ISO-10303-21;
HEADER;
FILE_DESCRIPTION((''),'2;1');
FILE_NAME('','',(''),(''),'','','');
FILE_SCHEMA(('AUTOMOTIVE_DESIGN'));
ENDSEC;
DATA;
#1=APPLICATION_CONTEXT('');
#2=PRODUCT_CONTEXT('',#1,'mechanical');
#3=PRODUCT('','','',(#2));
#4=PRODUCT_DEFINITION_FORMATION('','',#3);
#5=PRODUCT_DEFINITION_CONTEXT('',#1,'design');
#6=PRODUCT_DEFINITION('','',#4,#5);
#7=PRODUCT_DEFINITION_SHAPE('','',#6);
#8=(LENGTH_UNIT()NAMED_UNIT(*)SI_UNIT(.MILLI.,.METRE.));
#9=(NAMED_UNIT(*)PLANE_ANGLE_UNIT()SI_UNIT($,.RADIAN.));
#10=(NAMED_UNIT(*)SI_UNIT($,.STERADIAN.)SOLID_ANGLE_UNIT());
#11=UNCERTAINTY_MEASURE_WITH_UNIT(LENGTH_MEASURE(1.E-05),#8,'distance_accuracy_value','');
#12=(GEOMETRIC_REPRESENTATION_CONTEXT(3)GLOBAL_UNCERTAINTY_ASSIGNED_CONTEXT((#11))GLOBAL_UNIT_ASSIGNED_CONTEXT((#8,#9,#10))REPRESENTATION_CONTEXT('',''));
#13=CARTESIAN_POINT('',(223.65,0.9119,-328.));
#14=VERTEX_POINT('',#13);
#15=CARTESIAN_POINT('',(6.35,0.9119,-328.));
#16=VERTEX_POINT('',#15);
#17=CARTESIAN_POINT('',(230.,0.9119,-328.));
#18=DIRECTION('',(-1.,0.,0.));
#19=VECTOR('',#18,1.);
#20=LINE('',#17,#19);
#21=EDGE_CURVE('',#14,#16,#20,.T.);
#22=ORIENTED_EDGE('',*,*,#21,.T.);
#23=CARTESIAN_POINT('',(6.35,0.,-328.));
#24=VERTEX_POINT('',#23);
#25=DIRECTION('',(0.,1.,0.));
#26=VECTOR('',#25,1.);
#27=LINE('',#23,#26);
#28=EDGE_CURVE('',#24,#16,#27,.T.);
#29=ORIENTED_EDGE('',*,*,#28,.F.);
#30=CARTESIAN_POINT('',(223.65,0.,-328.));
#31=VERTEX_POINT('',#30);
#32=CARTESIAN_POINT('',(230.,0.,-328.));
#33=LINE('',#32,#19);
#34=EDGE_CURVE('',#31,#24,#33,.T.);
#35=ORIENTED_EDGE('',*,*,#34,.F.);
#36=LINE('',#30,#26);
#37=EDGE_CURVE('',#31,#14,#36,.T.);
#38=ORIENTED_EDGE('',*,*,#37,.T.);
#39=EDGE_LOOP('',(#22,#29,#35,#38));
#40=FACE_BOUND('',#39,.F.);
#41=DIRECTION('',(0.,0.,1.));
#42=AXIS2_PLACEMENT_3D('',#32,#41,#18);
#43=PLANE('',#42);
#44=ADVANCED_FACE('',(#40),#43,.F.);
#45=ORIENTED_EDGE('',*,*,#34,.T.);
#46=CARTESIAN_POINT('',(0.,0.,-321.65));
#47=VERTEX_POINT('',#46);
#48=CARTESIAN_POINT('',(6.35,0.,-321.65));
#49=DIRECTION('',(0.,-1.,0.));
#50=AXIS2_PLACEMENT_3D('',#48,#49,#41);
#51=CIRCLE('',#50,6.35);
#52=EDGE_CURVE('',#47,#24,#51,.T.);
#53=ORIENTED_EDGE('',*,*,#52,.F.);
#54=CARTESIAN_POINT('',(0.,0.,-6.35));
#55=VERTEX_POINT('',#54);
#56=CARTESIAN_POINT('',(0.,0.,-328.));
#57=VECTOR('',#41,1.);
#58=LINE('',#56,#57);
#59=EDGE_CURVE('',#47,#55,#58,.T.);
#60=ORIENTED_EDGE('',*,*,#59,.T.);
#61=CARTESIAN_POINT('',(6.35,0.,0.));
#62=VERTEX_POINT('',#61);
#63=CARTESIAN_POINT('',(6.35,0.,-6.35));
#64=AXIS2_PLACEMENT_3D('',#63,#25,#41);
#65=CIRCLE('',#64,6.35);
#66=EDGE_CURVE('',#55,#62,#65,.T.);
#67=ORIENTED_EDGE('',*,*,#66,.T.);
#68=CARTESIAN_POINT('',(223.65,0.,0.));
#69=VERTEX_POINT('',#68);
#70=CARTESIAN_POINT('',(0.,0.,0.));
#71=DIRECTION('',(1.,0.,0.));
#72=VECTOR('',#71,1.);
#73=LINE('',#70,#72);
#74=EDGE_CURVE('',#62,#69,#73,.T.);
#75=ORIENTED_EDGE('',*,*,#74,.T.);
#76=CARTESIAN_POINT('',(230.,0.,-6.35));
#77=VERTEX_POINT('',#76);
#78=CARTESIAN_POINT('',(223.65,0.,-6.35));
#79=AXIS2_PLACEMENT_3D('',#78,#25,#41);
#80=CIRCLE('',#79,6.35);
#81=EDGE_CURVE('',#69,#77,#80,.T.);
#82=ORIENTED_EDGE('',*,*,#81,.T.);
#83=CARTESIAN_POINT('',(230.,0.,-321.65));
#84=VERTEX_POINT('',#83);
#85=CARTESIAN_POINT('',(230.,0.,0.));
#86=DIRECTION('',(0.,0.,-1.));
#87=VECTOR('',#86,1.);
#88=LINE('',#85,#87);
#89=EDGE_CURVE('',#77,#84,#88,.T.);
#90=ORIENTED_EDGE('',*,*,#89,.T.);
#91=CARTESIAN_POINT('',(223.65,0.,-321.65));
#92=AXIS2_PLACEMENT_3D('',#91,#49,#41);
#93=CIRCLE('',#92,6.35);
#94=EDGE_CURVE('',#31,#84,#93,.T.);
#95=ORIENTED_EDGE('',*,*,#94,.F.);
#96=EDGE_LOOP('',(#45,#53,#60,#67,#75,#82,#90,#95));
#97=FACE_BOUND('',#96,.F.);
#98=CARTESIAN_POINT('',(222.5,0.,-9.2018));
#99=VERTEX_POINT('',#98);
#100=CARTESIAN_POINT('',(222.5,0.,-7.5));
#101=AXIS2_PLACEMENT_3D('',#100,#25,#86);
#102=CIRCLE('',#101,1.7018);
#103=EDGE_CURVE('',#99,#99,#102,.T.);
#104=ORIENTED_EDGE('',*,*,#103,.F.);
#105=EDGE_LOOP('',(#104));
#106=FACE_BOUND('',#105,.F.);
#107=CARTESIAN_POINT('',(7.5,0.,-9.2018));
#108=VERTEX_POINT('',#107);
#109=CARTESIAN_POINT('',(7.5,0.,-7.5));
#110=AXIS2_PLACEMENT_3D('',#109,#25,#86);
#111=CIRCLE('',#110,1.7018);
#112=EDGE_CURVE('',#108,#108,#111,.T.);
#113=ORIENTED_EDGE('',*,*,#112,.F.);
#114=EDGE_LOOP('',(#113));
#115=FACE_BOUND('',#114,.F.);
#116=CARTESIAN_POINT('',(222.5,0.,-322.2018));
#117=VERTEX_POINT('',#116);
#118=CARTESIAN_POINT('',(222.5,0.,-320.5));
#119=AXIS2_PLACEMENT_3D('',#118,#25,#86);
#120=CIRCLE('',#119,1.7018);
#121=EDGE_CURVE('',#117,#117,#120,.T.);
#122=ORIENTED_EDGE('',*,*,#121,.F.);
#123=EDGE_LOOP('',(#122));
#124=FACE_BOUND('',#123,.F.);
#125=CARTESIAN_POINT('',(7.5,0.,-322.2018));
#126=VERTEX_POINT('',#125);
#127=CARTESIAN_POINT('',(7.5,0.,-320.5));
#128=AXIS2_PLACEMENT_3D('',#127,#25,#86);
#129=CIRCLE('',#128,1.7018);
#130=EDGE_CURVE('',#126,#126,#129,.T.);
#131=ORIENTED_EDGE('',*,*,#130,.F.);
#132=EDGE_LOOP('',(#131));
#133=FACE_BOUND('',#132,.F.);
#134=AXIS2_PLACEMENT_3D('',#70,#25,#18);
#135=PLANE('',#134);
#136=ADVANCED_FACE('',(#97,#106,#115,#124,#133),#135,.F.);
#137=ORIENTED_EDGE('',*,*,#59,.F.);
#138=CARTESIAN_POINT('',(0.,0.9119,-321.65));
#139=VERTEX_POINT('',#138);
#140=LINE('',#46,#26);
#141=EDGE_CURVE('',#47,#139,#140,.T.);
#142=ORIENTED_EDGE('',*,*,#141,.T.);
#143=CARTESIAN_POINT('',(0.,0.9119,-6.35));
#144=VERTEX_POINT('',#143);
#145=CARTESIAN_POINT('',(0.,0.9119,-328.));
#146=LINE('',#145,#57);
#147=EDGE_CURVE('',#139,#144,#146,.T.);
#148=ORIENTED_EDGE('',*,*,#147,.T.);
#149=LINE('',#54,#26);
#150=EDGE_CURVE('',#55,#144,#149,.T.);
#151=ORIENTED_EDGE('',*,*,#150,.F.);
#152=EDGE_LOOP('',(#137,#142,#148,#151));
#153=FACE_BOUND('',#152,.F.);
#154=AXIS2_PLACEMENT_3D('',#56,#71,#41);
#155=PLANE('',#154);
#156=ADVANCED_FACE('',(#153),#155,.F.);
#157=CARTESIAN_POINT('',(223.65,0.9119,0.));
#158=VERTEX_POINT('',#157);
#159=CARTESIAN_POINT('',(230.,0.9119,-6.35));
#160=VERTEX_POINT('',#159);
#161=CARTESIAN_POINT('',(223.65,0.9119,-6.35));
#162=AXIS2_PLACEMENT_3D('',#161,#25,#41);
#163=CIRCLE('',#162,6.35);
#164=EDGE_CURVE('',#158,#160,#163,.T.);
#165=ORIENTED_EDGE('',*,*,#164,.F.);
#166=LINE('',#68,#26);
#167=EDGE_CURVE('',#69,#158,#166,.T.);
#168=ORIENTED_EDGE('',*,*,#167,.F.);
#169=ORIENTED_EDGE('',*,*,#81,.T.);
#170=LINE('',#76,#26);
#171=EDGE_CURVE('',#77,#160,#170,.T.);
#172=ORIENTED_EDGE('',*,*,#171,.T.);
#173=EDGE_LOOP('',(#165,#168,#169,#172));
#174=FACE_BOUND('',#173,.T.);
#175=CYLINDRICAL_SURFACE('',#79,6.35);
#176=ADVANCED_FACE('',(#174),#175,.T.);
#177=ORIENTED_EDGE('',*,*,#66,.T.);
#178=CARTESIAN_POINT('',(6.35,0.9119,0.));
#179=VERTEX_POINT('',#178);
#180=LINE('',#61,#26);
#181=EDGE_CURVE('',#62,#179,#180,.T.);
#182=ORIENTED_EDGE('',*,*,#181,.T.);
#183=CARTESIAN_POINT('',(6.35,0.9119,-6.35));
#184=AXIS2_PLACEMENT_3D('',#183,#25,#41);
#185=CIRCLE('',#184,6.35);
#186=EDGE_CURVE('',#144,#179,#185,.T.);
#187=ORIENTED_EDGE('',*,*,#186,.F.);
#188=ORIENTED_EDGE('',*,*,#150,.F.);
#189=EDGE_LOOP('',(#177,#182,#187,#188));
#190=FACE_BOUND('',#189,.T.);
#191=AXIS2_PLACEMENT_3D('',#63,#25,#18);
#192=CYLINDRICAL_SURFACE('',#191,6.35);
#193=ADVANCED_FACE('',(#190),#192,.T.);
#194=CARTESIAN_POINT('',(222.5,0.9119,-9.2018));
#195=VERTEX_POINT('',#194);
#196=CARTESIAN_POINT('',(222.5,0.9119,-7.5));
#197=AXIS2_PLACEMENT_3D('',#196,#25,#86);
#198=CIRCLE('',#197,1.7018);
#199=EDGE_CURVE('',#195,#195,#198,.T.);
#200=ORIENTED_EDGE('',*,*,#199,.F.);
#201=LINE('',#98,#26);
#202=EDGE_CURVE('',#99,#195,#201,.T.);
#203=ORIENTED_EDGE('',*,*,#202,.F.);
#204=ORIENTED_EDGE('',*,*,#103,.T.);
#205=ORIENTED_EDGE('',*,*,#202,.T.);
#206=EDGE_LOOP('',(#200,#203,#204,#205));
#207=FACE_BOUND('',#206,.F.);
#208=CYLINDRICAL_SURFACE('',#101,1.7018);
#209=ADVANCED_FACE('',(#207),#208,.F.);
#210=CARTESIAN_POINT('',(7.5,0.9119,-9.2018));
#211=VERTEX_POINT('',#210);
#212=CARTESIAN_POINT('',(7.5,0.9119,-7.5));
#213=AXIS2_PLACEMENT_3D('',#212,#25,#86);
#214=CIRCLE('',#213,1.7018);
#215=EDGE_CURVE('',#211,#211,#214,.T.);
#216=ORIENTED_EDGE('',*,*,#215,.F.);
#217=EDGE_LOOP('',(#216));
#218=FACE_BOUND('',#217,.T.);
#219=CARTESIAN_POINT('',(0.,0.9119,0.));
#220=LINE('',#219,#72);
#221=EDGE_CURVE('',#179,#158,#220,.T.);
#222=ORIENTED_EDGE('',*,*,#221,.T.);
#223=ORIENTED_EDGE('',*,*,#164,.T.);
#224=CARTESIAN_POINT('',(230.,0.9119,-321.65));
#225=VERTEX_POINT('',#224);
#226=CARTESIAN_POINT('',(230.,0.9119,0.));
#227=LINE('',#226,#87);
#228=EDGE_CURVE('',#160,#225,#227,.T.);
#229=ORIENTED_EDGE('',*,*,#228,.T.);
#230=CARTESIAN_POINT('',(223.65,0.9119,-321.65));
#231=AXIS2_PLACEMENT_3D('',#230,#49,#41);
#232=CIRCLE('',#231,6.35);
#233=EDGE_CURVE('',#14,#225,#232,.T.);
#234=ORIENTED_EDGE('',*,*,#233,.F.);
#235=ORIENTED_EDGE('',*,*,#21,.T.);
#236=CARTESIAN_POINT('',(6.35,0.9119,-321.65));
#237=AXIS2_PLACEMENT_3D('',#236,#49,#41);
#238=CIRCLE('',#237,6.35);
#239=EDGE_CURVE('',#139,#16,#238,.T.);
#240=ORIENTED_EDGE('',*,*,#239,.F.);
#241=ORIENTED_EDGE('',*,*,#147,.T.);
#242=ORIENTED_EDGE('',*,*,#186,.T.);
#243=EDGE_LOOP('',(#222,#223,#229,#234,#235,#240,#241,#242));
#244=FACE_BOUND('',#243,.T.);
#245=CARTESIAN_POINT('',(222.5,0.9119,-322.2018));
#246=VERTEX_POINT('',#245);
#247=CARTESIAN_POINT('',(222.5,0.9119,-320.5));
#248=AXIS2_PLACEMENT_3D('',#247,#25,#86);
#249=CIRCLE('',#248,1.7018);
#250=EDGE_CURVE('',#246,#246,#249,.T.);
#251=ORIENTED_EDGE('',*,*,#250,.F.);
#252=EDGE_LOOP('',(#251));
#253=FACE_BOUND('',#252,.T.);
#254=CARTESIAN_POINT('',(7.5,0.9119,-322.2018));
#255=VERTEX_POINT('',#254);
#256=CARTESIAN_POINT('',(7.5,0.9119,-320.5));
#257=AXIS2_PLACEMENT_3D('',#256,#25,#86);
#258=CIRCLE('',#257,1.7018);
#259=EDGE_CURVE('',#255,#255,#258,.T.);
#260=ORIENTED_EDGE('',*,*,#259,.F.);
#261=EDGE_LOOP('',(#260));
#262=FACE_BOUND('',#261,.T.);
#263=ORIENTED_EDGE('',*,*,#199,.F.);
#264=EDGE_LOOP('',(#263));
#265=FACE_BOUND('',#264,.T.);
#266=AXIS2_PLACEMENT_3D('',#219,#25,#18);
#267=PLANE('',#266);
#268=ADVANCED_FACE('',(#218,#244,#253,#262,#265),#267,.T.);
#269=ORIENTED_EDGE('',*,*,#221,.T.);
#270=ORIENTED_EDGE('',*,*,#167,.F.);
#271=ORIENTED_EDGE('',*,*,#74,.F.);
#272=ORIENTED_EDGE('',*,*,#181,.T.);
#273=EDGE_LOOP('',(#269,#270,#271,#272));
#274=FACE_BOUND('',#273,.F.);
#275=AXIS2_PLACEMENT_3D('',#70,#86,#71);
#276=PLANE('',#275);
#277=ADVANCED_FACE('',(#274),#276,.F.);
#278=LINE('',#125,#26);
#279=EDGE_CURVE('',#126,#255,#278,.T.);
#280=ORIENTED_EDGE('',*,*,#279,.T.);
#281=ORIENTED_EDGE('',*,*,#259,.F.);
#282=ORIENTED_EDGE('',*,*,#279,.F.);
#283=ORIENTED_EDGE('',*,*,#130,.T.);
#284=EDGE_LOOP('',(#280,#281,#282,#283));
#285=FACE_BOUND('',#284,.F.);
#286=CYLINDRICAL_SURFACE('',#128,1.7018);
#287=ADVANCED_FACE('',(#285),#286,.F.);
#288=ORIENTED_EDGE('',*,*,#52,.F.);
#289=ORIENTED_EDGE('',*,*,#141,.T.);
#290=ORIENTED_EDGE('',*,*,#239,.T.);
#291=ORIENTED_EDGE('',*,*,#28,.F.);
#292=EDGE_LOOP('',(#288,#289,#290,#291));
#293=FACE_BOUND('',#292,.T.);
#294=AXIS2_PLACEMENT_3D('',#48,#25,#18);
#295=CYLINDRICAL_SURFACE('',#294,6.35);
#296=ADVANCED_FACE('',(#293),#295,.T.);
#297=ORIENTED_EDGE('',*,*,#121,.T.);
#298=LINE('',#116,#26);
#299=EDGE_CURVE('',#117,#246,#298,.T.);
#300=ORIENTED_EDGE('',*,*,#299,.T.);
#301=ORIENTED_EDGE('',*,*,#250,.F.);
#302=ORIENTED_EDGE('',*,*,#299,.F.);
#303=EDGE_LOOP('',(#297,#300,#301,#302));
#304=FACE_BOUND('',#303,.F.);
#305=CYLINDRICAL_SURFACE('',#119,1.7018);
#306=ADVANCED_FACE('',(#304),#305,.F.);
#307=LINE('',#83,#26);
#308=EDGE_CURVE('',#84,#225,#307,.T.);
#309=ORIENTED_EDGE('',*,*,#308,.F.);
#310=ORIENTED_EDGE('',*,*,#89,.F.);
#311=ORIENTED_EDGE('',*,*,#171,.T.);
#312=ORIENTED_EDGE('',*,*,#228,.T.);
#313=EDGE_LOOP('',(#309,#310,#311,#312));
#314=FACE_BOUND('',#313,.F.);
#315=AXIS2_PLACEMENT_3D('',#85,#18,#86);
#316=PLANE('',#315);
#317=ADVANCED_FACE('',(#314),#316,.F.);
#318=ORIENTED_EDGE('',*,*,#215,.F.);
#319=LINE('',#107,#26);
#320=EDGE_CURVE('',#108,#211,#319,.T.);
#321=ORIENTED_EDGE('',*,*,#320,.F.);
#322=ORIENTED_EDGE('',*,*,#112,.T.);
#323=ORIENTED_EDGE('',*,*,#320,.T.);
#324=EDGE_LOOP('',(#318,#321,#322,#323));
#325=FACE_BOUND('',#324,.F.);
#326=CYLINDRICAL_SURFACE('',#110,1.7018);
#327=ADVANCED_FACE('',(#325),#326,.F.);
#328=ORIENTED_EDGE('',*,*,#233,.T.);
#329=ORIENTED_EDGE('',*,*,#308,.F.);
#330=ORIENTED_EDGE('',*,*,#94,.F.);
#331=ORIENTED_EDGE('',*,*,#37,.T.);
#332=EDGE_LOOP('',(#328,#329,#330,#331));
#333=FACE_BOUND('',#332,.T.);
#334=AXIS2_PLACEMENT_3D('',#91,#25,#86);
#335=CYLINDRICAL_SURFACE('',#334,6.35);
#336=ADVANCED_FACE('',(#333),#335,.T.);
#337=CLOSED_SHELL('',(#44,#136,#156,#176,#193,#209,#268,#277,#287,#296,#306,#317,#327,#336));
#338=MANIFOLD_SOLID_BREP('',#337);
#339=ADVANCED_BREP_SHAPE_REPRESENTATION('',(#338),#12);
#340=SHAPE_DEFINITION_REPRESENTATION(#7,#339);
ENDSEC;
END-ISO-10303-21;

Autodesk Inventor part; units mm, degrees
ref_plane "YZ Plane" through (0, 0, 0) normal (1, 0, 0) x (0, 1, 0)
ref_plane "XZ Plane" through (0, 0, 0) normal (0, 1, 0) x (-1, 0, 0)
ref_plane "XY Plane" through (0, 0, 0) normal (0, 0, 1) x (1, 0, 0)
sketch "Sketch1" plane through (0, 0, 0) normal (0, 1, 0) x (-1, 0, 0)
  line L0 (0, 0) -> (-230, 0)
  line L1 (-230, 0) -> (-230, -328)
  line L2 (-230, -328) -> (0, -328)
  line L3 (0, -328) -> (0, 0)
  line L4 (-222.5, -7.5) -> (-7.5, -7.5) construction
  line L5 (-7.5, -7.5) -> (-7.5, -320.5) construction
  line L6 (-7.5, -320.5) -> (-222.5, -320.5) construction
  line L7 (-222.5, -320.5) -> (-222.5, -7.5) construction
  circle A0 centre (-7.5, -320.5) radius 1.6
  circle A1 centre (-222.5, -320.5) radius 1.6
  circle A2 centre (-222.5, -7.5) radius 1.6
  circle A3 centre (-7.5, -7.5) radius 1.6
  point P0 (-115, 0)
  dimension "d0" = 230
  dimension "d1" = 328
  dimension "d3" = 7.5
  dimension "d4" = 7.5
  dimension "d5" = 7.5
  dimension "d6" = 7.5
  dimension "d7" = 3.2
extrude "Plate1" add sketch "Sketch1" along normal blind 0.9119 contours L3 L2 L1 L0 | A0 | A1 | A2 | A3
hole "Hole1" at (222.5, 0, -320.5) at (7.5, 0, -320.5) at (7.5, 0, -7.5) at (222.5, 0, -7.5) direction (0, 1, 0) diameter 3.4036 end through all clearance for "Flat Head Machine Screw" size "M3" standard "Ansi Metric M Profile"
fillet "Corner Round1" radius 6.35 4 edges at (230, 0.4559, -328) (0, 0.4559, -328) (230, 0.4559, 0) (0, 0.4559, 0)
equation "\"d13\" = Thickness"
equation "\"d2\" = Thickness"
equation "\"BendRadius\" = Thickness"
equation "\"BendReliefWidth\" = Thickness"
equation "\"BendReliefDepth\" = 0.5 * Thickness"
equation "\"CornerReliefSize\" = 4 * Thickness"
equation "\"MinimumRemnant\" = 2 * Thickness"
equation "\"TransitionRadius\" = BendRadius"
equation "\"JacobiRadiusSize\" = BendRadius"
equation "\"GapSize\" = Thickness"
equation "\"Thickness\" = 0.91186"
properties part number "Side Panel" material "Steel, Carbon"
